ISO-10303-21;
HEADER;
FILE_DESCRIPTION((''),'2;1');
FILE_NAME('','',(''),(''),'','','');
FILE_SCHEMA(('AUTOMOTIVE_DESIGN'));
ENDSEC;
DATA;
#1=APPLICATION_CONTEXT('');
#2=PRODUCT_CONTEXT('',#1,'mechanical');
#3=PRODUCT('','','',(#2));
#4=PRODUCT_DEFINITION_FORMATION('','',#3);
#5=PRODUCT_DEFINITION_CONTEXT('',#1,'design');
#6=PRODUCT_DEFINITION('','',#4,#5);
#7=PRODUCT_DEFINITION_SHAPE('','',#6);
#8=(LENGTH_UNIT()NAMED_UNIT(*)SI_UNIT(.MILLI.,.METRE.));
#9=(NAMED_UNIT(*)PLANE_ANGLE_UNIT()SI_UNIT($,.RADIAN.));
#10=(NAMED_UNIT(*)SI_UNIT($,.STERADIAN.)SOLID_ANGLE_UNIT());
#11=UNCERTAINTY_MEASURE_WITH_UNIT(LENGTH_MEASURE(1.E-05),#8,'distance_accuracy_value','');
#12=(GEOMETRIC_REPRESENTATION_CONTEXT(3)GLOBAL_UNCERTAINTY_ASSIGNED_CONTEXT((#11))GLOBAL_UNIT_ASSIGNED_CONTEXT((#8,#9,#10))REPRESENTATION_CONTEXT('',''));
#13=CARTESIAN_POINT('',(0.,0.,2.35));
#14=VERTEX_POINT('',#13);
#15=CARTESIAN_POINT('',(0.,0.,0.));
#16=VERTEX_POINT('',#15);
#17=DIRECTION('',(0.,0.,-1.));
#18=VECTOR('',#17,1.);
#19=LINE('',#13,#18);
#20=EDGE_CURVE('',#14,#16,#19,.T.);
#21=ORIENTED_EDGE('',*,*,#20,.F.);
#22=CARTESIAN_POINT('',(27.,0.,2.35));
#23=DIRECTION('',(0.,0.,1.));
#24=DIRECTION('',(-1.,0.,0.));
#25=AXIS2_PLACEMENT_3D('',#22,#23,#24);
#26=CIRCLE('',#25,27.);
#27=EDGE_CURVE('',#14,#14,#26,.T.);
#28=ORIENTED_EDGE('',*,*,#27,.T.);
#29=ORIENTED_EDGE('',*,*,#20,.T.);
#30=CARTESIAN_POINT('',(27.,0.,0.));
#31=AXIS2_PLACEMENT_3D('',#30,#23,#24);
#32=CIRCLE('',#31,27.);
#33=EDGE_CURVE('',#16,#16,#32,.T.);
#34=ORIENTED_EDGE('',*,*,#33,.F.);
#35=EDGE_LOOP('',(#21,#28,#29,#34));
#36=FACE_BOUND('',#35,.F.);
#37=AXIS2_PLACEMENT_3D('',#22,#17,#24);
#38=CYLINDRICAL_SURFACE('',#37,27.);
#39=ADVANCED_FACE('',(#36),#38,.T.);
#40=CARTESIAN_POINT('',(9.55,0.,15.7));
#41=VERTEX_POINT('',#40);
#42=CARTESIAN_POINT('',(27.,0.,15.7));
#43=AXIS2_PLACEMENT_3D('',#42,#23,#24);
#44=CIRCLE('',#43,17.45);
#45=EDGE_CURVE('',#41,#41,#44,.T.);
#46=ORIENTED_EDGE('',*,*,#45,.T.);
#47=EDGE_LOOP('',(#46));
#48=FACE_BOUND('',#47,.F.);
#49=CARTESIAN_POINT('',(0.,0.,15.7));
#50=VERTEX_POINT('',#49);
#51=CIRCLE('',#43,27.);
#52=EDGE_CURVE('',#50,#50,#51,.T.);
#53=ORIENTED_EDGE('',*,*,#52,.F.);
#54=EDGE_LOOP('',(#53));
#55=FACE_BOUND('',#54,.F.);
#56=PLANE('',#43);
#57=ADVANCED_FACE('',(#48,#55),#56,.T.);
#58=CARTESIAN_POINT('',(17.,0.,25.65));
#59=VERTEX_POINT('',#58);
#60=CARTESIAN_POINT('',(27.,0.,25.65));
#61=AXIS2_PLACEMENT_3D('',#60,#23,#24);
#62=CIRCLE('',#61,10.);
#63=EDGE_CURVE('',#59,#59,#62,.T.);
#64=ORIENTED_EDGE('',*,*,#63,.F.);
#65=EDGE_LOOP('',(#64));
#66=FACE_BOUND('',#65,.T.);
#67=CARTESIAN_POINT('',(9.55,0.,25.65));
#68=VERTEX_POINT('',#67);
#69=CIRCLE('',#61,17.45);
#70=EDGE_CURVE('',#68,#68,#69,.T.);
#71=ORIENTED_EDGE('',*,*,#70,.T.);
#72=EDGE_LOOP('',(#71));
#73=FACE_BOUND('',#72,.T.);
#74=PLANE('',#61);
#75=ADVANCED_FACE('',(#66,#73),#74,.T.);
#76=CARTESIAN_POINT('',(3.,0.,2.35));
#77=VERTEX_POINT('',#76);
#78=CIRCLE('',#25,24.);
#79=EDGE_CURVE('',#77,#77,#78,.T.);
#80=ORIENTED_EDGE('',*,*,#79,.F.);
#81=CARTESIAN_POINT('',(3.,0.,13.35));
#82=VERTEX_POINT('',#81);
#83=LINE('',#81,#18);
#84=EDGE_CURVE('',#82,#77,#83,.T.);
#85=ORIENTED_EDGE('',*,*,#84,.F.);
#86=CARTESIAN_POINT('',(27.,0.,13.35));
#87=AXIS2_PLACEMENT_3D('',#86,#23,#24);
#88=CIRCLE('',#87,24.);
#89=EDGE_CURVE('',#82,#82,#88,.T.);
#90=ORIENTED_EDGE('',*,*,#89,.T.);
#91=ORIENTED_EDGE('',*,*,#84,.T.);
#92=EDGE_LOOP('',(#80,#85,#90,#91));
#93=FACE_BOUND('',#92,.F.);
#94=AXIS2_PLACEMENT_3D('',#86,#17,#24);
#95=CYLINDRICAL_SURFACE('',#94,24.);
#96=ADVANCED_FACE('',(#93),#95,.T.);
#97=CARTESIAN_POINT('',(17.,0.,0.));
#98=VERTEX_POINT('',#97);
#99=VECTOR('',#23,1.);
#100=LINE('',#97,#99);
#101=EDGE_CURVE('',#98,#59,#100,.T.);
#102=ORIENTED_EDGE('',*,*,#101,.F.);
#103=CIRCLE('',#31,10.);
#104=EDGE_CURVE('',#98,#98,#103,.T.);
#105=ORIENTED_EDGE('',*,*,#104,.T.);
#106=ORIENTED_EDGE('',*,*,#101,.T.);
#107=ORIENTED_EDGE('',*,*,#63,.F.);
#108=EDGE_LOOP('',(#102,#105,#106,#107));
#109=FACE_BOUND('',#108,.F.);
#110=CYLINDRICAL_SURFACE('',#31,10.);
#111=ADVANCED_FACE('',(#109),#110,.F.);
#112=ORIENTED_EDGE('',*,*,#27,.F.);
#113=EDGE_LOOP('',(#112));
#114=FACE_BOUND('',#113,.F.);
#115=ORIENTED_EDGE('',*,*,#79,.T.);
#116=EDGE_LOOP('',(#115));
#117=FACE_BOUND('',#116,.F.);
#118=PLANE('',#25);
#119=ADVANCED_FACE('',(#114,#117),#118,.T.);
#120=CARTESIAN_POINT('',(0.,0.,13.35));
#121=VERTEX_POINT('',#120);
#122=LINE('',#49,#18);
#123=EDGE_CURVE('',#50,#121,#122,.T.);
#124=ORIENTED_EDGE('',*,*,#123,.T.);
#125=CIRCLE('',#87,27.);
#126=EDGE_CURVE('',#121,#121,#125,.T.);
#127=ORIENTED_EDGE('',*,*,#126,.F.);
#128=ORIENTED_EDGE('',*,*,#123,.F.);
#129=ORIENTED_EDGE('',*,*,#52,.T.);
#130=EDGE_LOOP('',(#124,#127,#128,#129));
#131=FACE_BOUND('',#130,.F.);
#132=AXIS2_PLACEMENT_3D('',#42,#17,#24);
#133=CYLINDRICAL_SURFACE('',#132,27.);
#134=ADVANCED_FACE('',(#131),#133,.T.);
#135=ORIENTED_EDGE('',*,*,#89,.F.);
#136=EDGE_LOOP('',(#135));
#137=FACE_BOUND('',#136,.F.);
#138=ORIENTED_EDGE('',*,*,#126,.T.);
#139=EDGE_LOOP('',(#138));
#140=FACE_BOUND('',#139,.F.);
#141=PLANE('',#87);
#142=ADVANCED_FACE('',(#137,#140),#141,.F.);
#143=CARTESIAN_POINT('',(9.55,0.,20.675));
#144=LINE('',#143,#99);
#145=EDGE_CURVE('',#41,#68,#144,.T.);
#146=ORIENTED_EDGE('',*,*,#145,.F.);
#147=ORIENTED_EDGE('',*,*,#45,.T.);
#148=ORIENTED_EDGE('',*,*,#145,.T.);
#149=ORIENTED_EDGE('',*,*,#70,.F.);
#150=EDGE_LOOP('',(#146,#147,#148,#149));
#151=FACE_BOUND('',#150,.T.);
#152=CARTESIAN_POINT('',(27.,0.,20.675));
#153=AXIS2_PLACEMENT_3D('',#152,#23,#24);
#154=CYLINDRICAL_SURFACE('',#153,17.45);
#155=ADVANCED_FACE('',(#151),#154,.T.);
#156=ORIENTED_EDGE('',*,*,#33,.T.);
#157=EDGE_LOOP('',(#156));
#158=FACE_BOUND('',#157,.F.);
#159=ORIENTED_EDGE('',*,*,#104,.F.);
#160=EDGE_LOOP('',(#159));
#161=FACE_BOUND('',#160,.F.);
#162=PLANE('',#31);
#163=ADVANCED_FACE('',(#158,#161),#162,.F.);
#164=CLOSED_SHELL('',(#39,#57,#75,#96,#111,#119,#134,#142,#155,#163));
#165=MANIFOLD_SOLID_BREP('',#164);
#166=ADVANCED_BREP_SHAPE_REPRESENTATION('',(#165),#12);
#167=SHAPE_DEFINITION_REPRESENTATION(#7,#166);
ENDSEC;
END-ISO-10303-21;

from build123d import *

# Parameters (mm, degrees)
F0_W = 7.45
F0_H = 9.95


# Not quite as in the source:
# - a feature names something its author has since deleted; it is built from what else it names


with BuildPart() as f1:
    # F0 (on Front) → F1 (revolve)
    with BuildSketch(Plane.XZ):
        Polygon((0, 2.35), (0, 0), (17, 0), (17, 15.7), (9.55, 15.7), (0, 15.7), (0, 13.35), (3, 13.35), (3, 2.35), align=None)
        with Locations((13.275, 20.675)):
            Rectangle(F0_W, F0_H)
    revolve(axis=Axis((27, 0, 7.85), (0, 0, 1)))


solid = f1.part
